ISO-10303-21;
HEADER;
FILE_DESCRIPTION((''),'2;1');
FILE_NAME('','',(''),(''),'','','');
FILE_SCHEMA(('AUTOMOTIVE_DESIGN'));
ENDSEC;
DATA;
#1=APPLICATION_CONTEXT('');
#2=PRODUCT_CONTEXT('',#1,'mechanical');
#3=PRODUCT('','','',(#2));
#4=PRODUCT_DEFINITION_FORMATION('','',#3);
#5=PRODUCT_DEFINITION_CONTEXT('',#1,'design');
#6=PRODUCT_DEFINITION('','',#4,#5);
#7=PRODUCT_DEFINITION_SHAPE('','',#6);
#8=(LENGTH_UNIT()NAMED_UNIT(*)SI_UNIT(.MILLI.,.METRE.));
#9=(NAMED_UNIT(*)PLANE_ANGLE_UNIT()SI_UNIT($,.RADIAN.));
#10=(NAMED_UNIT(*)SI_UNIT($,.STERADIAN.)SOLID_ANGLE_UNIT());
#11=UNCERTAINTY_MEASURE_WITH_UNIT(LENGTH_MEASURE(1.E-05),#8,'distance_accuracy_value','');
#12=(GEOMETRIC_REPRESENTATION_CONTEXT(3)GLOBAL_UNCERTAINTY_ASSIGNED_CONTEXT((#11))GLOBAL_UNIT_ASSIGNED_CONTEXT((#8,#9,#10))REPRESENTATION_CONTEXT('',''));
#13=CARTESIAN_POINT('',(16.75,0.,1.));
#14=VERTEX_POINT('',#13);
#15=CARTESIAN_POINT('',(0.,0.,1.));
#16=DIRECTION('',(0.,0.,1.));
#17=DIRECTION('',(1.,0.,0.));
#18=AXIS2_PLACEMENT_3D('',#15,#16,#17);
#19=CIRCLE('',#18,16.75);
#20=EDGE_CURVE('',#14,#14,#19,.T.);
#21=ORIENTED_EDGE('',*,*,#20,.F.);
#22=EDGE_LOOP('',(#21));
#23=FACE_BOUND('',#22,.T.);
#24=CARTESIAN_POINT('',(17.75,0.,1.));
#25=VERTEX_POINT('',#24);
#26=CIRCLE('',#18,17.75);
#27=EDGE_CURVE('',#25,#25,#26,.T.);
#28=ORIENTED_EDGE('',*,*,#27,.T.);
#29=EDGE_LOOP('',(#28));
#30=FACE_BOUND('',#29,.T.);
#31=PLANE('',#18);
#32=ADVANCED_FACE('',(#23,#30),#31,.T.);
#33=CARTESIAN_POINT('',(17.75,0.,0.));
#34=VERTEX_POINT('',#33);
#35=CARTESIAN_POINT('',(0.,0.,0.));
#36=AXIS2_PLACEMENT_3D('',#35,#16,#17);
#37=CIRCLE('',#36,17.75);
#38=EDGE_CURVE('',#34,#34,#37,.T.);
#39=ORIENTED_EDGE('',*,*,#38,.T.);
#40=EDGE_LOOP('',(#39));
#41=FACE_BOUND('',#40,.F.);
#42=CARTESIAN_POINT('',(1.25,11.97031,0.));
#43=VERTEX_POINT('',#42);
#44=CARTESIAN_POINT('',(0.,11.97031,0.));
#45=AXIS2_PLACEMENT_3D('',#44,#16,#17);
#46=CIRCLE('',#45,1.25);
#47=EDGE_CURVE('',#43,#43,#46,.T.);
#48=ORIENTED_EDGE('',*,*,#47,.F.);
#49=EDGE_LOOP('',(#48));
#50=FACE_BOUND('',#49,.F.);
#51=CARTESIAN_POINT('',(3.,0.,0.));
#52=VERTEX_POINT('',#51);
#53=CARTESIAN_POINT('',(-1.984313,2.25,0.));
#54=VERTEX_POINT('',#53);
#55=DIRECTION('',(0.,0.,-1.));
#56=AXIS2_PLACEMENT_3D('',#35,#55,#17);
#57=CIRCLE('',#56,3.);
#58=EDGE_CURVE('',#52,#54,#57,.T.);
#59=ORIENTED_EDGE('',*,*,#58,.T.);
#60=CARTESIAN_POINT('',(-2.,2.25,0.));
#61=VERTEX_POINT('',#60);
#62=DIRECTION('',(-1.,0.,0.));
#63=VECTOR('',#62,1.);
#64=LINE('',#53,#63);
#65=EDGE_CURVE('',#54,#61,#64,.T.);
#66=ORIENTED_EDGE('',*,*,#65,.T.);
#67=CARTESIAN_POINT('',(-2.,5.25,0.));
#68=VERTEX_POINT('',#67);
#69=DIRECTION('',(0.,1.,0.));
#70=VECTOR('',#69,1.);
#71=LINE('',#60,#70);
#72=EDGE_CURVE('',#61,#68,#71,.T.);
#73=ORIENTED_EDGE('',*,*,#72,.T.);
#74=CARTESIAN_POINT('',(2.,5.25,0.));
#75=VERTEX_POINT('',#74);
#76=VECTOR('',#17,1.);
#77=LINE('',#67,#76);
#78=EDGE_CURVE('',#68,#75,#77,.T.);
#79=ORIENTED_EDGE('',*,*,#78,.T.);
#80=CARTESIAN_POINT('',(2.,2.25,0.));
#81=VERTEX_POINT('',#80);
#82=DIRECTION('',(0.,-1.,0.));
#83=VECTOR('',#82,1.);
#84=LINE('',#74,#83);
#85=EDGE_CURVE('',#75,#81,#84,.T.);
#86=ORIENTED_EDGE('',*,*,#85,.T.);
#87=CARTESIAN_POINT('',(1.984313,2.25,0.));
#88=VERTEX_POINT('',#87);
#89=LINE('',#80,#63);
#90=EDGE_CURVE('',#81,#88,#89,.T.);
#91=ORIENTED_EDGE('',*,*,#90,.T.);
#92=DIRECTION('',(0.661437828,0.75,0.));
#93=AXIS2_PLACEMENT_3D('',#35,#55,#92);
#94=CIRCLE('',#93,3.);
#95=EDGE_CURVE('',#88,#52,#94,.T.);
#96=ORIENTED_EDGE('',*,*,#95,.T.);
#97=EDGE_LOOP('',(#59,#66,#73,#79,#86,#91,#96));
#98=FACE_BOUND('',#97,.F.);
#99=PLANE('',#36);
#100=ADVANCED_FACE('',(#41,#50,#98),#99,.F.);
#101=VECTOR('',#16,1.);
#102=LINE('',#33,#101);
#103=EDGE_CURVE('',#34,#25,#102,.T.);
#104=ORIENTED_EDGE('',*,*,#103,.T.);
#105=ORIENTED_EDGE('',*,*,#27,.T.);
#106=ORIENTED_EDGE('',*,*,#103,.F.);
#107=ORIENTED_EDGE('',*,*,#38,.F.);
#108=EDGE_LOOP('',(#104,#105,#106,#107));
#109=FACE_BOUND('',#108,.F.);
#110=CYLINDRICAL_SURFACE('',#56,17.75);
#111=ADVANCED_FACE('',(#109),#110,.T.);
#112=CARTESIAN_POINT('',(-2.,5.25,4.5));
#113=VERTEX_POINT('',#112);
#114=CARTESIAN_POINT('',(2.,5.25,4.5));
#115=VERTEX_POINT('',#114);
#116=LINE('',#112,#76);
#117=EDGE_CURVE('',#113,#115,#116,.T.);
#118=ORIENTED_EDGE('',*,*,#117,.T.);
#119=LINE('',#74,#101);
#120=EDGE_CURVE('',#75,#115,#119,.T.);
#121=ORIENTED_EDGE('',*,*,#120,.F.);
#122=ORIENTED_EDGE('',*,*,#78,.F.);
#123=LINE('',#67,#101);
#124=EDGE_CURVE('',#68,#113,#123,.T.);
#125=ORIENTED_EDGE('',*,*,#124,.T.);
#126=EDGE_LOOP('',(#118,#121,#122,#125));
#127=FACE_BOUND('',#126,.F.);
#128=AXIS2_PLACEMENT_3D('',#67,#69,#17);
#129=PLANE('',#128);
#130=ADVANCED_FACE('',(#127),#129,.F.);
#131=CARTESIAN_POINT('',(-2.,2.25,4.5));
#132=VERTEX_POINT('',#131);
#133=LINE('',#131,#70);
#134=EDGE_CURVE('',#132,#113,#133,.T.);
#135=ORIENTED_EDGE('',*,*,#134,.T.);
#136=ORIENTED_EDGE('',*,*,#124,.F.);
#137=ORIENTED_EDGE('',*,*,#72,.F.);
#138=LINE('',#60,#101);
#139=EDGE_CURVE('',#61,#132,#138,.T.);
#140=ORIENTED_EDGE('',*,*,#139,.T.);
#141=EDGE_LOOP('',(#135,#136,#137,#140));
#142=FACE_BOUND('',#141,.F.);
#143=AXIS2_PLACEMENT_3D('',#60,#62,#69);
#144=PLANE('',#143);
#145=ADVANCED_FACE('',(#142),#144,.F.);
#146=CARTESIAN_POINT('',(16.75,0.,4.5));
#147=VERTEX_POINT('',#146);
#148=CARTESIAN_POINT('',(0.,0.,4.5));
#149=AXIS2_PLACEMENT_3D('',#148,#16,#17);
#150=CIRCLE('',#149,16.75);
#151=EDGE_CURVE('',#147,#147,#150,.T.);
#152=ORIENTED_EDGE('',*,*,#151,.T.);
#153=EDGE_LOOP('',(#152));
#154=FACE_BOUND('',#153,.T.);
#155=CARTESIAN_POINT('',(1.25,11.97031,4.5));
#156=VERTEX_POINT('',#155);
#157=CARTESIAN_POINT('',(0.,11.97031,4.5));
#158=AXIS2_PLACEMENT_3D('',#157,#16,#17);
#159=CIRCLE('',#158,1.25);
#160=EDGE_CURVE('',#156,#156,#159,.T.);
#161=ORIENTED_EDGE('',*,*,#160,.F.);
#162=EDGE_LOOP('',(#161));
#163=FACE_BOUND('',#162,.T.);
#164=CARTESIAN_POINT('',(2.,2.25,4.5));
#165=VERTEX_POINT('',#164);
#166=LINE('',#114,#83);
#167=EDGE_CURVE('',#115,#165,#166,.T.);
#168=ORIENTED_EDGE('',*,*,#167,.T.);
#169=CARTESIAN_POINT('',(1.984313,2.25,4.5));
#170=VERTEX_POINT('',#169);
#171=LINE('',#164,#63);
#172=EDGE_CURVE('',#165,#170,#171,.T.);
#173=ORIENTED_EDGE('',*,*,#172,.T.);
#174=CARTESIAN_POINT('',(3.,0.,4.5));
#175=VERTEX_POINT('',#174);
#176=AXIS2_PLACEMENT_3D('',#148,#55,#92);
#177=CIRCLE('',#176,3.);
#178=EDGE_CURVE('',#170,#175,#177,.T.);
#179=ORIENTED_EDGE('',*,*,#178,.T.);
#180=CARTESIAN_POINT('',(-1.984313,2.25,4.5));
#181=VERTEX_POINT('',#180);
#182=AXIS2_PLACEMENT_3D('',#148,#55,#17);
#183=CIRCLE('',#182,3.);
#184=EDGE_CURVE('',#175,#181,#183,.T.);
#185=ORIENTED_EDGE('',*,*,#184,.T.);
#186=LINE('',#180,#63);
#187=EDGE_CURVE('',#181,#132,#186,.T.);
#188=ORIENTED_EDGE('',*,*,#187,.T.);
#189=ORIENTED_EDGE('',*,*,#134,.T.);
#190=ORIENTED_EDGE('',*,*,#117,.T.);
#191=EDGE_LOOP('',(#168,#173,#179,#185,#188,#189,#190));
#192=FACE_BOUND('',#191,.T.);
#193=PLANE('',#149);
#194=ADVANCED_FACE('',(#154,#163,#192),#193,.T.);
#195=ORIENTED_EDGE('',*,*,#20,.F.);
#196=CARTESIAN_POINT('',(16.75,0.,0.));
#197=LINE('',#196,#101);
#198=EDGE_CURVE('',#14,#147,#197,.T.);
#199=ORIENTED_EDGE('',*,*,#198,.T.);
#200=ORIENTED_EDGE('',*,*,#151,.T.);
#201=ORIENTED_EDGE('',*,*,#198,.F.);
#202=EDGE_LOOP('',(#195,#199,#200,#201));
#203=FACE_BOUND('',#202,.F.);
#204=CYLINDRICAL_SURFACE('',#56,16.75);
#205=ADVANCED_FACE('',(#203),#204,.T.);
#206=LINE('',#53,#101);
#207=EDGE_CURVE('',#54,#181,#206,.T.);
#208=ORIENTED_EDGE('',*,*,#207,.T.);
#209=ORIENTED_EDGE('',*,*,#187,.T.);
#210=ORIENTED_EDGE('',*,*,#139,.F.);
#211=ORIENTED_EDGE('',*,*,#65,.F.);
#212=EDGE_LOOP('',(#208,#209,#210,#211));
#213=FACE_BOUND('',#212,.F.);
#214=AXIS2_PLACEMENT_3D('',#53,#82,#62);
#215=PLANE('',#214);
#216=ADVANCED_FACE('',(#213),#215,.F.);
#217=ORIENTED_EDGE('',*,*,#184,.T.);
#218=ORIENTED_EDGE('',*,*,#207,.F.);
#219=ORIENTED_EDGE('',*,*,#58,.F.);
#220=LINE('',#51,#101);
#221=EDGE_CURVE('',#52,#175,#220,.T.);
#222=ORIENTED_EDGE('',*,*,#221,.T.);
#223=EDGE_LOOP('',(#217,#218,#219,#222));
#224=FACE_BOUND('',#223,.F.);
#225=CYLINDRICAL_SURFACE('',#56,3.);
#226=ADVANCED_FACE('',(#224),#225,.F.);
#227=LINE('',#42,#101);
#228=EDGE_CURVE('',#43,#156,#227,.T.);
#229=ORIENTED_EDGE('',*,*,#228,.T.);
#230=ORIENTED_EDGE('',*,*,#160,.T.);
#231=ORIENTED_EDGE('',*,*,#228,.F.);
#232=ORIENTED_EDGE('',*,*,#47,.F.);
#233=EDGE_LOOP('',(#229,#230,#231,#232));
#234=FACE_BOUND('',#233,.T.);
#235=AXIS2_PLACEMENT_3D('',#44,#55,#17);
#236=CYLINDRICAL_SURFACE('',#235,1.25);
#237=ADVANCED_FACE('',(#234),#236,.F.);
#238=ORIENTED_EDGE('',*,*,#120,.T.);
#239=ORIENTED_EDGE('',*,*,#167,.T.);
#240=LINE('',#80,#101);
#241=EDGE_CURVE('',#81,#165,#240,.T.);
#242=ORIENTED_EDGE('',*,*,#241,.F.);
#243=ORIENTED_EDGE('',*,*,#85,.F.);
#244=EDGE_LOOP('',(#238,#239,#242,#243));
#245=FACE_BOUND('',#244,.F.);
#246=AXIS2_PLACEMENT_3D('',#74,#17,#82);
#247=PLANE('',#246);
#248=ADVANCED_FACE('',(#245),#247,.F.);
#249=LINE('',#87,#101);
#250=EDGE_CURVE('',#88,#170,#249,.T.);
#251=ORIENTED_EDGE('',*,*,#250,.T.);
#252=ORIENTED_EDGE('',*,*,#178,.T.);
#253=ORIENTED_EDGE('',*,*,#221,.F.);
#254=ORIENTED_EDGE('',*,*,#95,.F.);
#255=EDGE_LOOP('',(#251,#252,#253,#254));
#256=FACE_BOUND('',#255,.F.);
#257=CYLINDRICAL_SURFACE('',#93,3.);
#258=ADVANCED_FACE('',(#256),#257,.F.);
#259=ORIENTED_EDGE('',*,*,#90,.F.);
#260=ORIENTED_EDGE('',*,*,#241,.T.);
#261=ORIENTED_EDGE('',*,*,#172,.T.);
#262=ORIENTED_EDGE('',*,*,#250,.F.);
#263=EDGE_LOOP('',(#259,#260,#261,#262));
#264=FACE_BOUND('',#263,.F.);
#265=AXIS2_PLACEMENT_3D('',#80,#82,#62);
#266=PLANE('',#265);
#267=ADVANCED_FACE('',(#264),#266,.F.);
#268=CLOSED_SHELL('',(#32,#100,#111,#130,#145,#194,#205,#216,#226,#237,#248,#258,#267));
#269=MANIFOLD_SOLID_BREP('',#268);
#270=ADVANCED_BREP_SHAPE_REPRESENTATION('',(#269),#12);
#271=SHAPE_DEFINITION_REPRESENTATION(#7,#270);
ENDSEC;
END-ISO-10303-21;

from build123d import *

# Parameters (mm, degrees)
F0_R     = 16.75
F0_R_2   = 1.25
F1_DEPTH = 4.5
F0_R_3   = 17.75
F2_DEPTH = 1


# Not quite as in the source:
# - a feature names something its author has since deleted; it is built from what else it names


with BuildPart() as f1:
    # F0 (on Top) → F1 (new body)
    with BuildSketch(Plane.XY):
        Circle(F0_R)
        with BuildLine():
            ThreePointArc((1.9843134833, 2.25), (2.7343134833, 1.2343134833), (3, 0))
            ThreePointArc((3, 0), (-1.2343134833, -2.7343134833), (-1.9843134833, 2.25))
            Line((-1.9843134833, 2.25), (-2, 2.25))
            Line((-2, 2.25), (-2, 5.25))
            Line((-2, 5.25), (2, 5.25))
            Line((2, 5.25), (2, 2.25))
            Line((2, 2.25), (1.9843134833, 2.25))
        make_face(mode=Mode.SUBTRACT)
        with Locations((0, 11.9703095406)):
            Circle(F0_R_2, mode=Mode.SUBTRACT)
    extrude(amount=F1_DEPTH)

    # F0 (on Top) → F2 (join)
    with BuildSketch(Plane.XY):
        Circle(F0_R_3)
        Circle(F0_R, mode=Mode.SUBTRACT)
    extrude(amount=F2_DEPTH)


solid = f1.part
